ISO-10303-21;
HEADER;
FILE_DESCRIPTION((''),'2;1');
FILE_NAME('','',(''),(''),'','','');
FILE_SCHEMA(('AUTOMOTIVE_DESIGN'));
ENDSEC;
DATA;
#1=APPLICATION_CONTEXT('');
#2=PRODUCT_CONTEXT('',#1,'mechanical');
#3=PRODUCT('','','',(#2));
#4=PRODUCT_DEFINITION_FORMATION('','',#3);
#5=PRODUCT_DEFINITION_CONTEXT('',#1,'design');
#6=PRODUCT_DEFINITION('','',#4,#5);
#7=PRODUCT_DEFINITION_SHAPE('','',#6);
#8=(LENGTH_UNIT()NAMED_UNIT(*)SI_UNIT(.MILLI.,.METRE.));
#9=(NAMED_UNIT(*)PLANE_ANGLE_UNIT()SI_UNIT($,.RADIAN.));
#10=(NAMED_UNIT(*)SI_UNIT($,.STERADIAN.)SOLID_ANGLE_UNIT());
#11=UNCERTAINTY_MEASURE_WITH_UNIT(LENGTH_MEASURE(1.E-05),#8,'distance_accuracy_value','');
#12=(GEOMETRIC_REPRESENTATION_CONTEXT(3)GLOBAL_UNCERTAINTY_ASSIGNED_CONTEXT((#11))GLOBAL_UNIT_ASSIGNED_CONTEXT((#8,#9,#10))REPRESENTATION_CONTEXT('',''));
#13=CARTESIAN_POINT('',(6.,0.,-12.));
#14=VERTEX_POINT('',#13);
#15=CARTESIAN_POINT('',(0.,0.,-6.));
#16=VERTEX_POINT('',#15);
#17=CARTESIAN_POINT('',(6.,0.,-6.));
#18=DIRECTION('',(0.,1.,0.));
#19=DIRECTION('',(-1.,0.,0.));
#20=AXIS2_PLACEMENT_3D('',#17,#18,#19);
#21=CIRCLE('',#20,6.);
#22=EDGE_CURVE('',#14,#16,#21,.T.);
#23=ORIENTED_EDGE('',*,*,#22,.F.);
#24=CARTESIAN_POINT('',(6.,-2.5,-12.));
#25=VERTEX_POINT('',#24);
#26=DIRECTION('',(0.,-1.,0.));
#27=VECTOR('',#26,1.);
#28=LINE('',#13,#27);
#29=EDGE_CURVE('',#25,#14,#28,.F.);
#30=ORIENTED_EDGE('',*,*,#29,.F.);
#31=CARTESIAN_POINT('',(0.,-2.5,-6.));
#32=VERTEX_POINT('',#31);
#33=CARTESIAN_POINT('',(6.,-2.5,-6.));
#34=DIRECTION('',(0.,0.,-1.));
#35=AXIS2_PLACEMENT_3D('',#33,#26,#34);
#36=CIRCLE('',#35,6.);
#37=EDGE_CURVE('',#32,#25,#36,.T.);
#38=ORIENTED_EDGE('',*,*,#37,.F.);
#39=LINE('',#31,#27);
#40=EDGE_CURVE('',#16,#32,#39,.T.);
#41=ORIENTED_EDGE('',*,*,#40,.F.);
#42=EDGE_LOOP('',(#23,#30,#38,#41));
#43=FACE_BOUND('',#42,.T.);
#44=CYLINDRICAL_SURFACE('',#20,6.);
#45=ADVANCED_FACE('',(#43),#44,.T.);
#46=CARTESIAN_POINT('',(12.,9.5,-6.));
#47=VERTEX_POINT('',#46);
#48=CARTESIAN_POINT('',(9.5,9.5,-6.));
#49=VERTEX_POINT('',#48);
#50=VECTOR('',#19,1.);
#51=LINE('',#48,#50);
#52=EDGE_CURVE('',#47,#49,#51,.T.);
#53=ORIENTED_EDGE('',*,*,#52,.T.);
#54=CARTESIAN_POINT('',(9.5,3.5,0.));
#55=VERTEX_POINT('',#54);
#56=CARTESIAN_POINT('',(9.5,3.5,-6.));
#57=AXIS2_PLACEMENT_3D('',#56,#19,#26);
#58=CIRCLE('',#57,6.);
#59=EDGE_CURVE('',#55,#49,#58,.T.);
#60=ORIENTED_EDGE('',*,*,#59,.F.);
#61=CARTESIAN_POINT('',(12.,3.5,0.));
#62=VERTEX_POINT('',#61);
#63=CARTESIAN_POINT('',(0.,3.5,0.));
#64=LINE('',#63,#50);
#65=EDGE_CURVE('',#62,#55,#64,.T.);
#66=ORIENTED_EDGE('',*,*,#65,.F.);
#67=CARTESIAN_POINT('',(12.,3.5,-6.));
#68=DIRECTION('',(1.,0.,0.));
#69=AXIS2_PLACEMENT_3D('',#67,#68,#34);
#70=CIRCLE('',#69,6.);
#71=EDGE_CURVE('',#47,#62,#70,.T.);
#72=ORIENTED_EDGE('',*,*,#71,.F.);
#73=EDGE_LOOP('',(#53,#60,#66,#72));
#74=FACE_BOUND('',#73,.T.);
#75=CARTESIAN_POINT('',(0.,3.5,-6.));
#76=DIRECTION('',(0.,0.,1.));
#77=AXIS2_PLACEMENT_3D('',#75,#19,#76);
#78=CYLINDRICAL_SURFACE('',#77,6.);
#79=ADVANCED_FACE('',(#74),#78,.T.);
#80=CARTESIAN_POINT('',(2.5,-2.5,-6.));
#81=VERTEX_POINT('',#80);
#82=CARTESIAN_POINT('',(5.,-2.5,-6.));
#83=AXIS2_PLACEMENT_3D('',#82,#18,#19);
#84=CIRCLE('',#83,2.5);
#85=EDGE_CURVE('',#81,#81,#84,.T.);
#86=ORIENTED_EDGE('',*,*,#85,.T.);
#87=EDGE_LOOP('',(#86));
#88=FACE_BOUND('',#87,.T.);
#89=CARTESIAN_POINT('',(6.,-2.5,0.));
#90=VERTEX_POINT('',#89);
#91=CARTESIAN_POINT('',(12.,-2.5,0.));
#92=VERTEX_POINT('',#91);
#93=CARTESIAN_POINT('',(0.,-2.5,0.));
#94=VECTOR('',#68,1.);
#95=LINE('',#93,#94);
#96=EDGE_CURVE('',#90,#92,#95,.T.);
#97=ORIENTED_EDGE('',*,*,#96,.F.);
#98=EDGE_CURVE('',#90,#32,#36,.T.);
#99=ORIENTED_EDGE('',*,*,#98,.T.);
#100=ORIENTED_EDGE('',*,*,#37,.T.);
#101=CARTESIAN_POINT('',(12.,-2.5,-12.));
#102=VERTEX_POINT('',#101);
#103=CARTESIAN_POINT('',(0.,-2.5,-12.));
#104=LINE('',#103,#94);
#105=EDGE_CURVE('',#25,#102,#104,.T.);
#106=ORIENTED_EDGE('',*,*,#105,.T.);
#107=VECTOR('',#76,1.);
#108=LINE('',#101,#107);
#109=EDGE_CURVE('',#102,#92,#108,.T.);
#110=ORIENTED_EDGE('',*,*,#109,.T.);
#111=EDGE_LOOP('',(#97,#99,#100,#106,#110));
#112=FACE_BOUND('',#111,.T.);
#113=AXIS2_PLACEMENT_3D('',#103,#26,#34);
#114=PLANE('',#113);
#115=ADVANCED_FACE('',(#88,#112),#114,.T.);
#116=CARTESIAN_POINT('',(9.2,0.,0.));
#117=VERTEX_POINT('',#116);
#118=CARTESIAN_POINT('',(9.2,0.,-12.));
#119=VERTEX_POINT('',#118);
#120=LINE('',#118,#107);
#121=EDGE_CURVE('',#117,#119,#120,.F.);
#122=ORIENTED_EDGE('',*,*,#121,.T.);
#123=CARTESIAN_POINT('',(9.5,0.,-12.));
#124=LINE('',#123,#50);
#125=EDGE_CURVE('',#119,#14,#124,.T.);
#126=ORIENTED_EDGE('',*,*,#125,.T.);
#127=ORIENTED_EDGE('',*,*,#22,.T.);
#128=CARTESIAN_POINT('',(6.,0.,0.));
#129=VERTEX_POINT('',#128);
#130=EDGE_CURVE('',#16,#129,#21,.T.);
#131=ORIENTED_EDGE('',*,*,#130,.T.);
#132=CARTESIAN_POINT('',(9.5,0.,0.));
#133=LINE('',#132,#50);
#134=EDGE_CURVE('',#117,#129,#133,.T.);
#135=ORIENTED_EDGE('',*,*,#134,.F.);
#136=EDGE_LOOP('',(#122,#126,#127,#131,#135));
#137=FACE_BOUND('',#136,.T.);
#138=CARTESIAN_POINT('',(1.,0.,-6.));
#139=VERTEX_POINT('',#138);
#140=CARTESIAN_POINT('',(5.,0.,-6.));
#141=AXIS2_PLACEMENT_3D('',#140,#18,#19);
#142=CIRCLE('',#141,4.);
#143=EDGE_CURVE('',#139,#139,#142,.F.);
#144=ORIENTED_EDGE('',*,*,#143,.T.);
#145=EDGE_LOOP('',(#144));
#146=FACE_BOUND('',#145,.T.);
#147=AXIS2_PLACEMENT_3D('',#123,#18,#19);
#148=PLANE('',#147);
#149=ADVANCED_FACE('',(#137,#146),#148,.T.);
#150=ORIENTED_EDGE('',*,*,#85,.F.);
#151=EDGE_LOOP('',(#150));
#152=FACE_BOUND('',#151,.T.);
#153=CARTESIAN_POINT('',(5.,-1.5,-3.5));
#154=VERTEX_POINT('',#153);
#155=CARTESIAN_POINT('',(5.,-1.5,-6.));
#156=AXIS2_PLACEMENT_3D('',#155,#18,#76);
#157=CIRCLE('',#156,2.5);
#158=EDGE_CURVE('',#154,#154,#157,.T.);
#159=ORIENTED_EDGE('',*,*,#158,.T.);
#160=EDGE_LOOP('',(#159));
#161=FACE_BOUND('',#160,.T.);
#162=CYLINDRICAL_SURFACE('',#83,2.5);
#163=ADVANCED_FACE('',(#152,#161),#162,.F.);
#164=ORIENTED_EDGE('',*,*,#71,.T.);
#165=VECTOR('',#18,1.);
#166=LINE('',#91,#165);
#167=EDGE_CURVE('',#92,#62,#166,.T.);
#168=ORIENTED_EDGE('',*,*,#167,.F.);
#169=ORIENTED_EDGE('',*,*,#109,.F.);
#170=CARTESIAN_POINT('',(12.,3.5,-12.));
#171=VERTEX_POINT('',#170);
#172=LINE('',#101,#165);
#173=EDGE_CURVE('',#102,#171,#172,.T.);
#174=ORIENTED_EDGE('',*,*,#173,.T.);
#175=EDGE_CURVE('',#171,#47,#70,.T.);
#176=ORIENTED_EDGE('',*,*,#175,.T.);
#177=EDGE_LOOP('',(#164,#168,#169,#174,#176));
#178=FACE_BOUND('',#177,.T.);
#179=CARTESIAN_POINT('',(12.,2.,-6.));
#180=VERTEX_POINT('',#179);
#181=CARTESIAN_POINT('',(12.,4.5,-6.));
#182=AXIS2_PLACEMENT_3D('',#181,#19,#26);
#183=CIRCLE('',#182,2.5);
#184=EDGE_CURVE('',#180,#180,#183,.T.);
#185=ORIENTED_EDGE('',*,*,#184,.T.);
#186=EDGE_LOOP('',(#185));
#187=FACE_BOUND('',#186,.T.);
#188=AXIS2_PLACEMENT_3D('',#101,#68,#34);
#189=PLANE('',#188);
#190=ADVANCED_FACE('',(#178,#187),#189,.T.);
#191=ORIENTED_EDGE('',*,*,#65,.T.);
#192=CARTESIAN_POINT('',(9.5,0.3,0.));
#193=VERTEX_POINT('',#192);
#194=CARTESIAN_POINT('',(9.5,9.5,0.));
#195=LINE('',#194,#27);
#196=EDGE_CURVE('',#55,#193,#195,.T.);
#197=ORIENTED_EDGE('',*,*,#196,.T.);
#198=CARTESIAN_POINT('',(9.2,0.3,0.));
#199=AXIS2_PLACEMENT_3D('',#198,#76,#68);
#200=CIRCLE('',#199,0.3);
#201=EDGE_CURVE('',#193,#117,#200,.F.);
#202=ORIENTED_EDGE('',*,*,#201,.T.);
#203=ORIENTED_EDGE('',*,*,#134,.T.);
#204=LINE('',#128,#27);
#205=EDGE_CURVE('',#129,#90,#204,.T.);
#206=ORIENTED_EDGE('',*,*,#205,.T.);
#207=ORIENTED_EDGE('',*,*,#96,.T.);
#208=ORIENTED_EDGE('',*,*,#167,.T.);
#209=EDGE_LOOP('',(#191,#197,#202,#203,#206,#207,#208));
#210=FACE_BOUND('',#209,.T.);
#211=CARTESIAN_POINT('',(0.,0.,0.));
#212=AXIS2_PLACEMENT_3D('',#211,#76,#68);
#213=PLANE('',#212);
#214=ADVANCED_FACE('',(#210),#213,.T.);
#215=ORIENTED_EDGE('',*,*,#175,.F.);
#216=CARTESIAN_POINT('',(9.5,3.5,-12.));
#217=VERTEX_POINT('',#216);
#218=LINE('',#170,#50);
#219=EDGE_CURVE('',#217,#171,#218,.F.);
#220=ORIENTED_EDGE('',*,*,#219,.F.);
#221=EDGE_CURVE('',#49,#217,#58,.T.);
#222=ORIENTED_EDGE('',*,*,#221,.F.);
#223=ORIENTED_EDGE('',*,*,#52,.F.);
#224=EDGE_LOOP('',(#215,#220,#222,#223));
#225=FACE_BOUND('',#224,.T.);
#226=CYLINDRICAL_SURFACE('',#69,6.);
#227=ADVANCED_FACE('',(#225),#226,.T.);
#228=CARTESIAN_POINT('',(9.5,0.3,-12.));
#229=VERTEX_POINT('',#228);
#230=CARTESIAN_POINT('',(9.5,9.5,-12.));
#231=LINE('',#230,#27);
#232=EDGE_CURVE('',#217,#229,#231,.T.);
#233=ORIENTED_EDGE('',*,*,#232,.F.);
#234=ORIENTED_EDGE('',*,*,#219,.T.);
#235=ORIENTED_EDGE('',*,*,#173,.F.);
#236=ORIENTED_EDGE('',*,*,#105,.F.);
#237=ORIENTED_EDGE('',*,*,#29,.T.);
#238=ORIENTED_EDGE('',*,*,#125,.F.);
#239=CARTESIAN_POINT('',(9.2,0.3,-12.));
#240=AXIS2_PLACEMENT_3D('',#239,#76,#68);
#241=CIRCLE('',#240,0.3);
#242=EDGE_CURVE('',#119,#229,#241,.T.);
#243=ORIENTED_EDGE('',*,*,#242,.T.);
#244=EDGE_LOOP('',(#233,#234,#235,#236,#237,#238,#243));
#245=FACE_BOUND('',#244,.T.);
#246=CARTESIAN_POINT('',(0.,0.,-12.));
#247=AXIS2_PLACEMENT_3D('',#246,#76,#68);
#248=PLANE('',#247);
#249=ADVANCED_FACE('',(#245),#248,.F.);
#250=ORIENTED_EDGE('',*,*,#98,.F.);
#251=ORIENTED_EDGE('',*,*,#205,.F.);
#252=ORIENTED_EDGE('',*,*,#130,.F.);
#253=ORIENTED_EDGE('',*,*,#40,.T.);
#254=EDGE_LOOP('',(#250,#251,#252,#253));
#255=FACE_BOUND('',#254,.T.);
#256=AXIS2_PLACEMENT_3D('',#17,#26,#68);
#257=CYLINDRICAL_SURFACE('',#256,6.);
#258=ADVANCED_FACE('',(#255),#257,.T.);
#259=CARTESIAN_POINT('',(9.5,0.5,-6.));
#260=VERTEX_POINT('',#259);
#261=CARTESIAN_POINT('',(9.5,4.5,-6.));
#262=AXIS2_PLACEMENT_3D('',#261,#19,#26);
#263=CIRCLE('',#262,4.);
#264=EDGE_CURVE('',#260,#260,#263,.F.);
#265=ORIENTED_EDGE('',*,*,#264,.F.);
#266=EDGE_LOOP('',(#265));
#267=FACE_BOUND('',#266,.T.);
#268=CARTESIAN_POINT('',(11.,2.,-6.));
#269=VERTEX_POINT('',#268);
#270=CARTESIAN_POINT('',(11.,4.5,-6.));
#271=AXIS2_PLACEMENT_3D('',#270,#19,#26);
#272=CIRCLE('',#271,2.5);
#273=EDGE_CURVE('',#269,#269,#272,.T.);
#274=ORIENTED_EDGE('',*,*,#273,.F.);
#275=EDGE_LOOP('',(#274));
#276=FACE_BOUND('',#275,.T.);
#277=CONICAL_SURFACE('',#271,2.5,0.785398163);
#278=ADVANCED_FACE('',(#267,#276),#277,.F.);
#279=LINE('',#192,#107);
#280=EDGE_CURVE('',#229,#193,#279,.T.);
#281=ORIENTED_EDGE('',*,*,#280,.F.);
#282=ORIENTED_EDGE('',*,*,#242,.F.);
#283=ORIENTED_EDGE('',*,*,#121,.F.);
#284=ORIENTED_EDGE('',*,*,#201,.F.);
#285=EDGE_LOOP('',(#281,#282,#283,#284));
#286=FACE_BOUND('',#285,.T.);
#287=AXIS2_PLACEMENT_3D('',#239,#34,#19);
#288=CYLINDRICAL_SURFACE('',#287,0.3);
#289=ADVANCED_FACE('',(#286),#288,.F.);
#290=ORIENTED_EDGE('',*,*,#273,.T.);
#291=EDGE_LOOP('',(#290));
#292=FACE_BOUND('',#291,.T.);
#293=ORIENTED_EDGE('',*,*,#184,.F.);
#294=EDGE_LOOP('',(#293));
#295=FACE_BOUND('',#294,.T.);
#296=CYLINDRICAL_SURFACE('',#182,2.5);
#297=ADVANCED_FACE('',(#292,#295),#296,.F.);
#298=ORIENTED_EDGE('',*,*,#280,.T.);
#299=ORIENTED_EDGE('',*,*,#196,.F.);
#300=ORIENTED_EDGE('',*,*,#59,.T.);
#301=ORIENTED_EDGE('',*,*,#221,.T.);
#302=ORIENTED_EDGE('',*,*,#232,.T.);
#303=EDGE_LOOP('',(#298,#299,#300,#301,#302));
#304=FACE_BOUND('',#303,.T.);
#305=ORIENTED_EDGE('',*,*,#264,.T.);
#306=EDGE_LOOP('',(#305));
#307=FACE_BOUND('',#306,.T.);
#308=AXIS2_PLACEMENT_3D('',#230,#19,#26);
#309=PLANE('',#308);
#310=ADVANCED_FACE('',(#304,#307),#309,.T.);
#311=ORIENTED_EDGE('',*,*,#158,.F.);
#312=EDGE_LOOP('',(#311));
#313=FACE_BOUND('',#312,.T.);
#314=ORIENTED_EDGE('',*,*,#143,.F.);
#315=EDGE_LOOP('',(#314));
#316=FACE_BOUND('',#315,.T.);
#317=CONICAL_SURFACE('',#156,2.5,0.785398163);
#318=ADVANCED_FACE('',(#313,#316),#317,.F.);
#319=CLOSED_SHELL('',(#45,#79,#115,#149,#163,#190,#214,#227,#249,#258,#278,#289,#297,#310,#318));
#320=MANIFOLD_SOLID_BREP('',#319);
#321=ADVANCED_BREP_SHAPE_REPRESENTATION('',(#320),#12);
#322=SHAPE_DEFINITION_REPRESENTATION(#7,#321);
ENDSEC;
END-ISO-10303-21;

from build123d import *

# Parameters (mm, degrees)
RESSALTO_EXTRUS_O1_DEPTH = 12
FILETE1_R                = 6
FILETE2_R                = 6
ESBO_O3_R                = 2.5
CORTE_EXTRUS_O1_DEPTH    = 20.448650339
FILETE3_R                = 0.3
ESBO_O4_R                = 2.5
CORTE_EXTRUS_O2_DEPTH    = 19.013883535
CHANFRO2_SIZE            = 1.5


with BuildPart() as part:
    # Esboço2 → Ressalto-extrusão1 (new body)
    with BuildSketch(Plane.XY):
        Polygon((0, 0), (0, -2.5), (12, -2.5), (12, 9.5), (9.5, 9.5), (9.5, 0), align=None)
    extrude(amount=-RESSALTO_EXTRUS_O1_DEPTH)

    # Filete1
    filete1_edges = [part.edges().sort_by_distance(p)[0] for p in [
        (10.75, 9.5, 0),
        (10.75, 9.5, -12),
    ]]
    fillet(filete1_edges, radius=FILETE1_R - 0.0001)  # a hair under: the kernel refuses the full size

    # Filete2
    filete2_edges = [part.edges().sort_by_distance(p)[0] for p in [
        (0, -1.25, 0),
        (0, -1.25, -12),
    ]]
    fillet(filete2_edges, radius=FILETE2_R - 0.0001)  # a hair under: the kernel refuses the full size

    # Esboço3 → Corte-extrusão1 (cut, through all)
    with BuildSketch(Plane(origin=(0, 0, 0), x_dir=(1, 0, 0), z_dir=(0, 1, 0))):
        with Locations(Location((5, 6, 0), (0, 0, 180))):
            Circle(ESBO_O3_R)
    extrude(amount=-CORTE_EXTRUS_O1_DEPTH, mode=Mode.SUBTRACT)

    # Filete3
    filete3_edges = [part.edges().sort_by_distance(p)[0] for p in [
        (9.5, 0, -6),
    ]]
    fillet(filete3_edges, radius=FILETE3_R)

    # Esboço4 → Corte-extrusão2 (cut, through all)
    with BuildSketch(Plane.ZY.offset(-9.5)):
        with Locations(Location((-6, 4.5, 0), (0, 0, 270))):
            Circle(ESBO_O4_R)
    extrude(amount=-CORTE_EXTRUS_O2_DEPTH, mode=Mode.SUBTRACT)

    # Chanfro2
    chanfro2_edges = [part.edges().sort_by_distance(p)[0] for p in [
        (7.5, 0, -6),
        (9.5, 7, -6),
    ]]
    chamfer(chanfro2_edges, length=CHANFRO2_SIZE)


solid = part.part
